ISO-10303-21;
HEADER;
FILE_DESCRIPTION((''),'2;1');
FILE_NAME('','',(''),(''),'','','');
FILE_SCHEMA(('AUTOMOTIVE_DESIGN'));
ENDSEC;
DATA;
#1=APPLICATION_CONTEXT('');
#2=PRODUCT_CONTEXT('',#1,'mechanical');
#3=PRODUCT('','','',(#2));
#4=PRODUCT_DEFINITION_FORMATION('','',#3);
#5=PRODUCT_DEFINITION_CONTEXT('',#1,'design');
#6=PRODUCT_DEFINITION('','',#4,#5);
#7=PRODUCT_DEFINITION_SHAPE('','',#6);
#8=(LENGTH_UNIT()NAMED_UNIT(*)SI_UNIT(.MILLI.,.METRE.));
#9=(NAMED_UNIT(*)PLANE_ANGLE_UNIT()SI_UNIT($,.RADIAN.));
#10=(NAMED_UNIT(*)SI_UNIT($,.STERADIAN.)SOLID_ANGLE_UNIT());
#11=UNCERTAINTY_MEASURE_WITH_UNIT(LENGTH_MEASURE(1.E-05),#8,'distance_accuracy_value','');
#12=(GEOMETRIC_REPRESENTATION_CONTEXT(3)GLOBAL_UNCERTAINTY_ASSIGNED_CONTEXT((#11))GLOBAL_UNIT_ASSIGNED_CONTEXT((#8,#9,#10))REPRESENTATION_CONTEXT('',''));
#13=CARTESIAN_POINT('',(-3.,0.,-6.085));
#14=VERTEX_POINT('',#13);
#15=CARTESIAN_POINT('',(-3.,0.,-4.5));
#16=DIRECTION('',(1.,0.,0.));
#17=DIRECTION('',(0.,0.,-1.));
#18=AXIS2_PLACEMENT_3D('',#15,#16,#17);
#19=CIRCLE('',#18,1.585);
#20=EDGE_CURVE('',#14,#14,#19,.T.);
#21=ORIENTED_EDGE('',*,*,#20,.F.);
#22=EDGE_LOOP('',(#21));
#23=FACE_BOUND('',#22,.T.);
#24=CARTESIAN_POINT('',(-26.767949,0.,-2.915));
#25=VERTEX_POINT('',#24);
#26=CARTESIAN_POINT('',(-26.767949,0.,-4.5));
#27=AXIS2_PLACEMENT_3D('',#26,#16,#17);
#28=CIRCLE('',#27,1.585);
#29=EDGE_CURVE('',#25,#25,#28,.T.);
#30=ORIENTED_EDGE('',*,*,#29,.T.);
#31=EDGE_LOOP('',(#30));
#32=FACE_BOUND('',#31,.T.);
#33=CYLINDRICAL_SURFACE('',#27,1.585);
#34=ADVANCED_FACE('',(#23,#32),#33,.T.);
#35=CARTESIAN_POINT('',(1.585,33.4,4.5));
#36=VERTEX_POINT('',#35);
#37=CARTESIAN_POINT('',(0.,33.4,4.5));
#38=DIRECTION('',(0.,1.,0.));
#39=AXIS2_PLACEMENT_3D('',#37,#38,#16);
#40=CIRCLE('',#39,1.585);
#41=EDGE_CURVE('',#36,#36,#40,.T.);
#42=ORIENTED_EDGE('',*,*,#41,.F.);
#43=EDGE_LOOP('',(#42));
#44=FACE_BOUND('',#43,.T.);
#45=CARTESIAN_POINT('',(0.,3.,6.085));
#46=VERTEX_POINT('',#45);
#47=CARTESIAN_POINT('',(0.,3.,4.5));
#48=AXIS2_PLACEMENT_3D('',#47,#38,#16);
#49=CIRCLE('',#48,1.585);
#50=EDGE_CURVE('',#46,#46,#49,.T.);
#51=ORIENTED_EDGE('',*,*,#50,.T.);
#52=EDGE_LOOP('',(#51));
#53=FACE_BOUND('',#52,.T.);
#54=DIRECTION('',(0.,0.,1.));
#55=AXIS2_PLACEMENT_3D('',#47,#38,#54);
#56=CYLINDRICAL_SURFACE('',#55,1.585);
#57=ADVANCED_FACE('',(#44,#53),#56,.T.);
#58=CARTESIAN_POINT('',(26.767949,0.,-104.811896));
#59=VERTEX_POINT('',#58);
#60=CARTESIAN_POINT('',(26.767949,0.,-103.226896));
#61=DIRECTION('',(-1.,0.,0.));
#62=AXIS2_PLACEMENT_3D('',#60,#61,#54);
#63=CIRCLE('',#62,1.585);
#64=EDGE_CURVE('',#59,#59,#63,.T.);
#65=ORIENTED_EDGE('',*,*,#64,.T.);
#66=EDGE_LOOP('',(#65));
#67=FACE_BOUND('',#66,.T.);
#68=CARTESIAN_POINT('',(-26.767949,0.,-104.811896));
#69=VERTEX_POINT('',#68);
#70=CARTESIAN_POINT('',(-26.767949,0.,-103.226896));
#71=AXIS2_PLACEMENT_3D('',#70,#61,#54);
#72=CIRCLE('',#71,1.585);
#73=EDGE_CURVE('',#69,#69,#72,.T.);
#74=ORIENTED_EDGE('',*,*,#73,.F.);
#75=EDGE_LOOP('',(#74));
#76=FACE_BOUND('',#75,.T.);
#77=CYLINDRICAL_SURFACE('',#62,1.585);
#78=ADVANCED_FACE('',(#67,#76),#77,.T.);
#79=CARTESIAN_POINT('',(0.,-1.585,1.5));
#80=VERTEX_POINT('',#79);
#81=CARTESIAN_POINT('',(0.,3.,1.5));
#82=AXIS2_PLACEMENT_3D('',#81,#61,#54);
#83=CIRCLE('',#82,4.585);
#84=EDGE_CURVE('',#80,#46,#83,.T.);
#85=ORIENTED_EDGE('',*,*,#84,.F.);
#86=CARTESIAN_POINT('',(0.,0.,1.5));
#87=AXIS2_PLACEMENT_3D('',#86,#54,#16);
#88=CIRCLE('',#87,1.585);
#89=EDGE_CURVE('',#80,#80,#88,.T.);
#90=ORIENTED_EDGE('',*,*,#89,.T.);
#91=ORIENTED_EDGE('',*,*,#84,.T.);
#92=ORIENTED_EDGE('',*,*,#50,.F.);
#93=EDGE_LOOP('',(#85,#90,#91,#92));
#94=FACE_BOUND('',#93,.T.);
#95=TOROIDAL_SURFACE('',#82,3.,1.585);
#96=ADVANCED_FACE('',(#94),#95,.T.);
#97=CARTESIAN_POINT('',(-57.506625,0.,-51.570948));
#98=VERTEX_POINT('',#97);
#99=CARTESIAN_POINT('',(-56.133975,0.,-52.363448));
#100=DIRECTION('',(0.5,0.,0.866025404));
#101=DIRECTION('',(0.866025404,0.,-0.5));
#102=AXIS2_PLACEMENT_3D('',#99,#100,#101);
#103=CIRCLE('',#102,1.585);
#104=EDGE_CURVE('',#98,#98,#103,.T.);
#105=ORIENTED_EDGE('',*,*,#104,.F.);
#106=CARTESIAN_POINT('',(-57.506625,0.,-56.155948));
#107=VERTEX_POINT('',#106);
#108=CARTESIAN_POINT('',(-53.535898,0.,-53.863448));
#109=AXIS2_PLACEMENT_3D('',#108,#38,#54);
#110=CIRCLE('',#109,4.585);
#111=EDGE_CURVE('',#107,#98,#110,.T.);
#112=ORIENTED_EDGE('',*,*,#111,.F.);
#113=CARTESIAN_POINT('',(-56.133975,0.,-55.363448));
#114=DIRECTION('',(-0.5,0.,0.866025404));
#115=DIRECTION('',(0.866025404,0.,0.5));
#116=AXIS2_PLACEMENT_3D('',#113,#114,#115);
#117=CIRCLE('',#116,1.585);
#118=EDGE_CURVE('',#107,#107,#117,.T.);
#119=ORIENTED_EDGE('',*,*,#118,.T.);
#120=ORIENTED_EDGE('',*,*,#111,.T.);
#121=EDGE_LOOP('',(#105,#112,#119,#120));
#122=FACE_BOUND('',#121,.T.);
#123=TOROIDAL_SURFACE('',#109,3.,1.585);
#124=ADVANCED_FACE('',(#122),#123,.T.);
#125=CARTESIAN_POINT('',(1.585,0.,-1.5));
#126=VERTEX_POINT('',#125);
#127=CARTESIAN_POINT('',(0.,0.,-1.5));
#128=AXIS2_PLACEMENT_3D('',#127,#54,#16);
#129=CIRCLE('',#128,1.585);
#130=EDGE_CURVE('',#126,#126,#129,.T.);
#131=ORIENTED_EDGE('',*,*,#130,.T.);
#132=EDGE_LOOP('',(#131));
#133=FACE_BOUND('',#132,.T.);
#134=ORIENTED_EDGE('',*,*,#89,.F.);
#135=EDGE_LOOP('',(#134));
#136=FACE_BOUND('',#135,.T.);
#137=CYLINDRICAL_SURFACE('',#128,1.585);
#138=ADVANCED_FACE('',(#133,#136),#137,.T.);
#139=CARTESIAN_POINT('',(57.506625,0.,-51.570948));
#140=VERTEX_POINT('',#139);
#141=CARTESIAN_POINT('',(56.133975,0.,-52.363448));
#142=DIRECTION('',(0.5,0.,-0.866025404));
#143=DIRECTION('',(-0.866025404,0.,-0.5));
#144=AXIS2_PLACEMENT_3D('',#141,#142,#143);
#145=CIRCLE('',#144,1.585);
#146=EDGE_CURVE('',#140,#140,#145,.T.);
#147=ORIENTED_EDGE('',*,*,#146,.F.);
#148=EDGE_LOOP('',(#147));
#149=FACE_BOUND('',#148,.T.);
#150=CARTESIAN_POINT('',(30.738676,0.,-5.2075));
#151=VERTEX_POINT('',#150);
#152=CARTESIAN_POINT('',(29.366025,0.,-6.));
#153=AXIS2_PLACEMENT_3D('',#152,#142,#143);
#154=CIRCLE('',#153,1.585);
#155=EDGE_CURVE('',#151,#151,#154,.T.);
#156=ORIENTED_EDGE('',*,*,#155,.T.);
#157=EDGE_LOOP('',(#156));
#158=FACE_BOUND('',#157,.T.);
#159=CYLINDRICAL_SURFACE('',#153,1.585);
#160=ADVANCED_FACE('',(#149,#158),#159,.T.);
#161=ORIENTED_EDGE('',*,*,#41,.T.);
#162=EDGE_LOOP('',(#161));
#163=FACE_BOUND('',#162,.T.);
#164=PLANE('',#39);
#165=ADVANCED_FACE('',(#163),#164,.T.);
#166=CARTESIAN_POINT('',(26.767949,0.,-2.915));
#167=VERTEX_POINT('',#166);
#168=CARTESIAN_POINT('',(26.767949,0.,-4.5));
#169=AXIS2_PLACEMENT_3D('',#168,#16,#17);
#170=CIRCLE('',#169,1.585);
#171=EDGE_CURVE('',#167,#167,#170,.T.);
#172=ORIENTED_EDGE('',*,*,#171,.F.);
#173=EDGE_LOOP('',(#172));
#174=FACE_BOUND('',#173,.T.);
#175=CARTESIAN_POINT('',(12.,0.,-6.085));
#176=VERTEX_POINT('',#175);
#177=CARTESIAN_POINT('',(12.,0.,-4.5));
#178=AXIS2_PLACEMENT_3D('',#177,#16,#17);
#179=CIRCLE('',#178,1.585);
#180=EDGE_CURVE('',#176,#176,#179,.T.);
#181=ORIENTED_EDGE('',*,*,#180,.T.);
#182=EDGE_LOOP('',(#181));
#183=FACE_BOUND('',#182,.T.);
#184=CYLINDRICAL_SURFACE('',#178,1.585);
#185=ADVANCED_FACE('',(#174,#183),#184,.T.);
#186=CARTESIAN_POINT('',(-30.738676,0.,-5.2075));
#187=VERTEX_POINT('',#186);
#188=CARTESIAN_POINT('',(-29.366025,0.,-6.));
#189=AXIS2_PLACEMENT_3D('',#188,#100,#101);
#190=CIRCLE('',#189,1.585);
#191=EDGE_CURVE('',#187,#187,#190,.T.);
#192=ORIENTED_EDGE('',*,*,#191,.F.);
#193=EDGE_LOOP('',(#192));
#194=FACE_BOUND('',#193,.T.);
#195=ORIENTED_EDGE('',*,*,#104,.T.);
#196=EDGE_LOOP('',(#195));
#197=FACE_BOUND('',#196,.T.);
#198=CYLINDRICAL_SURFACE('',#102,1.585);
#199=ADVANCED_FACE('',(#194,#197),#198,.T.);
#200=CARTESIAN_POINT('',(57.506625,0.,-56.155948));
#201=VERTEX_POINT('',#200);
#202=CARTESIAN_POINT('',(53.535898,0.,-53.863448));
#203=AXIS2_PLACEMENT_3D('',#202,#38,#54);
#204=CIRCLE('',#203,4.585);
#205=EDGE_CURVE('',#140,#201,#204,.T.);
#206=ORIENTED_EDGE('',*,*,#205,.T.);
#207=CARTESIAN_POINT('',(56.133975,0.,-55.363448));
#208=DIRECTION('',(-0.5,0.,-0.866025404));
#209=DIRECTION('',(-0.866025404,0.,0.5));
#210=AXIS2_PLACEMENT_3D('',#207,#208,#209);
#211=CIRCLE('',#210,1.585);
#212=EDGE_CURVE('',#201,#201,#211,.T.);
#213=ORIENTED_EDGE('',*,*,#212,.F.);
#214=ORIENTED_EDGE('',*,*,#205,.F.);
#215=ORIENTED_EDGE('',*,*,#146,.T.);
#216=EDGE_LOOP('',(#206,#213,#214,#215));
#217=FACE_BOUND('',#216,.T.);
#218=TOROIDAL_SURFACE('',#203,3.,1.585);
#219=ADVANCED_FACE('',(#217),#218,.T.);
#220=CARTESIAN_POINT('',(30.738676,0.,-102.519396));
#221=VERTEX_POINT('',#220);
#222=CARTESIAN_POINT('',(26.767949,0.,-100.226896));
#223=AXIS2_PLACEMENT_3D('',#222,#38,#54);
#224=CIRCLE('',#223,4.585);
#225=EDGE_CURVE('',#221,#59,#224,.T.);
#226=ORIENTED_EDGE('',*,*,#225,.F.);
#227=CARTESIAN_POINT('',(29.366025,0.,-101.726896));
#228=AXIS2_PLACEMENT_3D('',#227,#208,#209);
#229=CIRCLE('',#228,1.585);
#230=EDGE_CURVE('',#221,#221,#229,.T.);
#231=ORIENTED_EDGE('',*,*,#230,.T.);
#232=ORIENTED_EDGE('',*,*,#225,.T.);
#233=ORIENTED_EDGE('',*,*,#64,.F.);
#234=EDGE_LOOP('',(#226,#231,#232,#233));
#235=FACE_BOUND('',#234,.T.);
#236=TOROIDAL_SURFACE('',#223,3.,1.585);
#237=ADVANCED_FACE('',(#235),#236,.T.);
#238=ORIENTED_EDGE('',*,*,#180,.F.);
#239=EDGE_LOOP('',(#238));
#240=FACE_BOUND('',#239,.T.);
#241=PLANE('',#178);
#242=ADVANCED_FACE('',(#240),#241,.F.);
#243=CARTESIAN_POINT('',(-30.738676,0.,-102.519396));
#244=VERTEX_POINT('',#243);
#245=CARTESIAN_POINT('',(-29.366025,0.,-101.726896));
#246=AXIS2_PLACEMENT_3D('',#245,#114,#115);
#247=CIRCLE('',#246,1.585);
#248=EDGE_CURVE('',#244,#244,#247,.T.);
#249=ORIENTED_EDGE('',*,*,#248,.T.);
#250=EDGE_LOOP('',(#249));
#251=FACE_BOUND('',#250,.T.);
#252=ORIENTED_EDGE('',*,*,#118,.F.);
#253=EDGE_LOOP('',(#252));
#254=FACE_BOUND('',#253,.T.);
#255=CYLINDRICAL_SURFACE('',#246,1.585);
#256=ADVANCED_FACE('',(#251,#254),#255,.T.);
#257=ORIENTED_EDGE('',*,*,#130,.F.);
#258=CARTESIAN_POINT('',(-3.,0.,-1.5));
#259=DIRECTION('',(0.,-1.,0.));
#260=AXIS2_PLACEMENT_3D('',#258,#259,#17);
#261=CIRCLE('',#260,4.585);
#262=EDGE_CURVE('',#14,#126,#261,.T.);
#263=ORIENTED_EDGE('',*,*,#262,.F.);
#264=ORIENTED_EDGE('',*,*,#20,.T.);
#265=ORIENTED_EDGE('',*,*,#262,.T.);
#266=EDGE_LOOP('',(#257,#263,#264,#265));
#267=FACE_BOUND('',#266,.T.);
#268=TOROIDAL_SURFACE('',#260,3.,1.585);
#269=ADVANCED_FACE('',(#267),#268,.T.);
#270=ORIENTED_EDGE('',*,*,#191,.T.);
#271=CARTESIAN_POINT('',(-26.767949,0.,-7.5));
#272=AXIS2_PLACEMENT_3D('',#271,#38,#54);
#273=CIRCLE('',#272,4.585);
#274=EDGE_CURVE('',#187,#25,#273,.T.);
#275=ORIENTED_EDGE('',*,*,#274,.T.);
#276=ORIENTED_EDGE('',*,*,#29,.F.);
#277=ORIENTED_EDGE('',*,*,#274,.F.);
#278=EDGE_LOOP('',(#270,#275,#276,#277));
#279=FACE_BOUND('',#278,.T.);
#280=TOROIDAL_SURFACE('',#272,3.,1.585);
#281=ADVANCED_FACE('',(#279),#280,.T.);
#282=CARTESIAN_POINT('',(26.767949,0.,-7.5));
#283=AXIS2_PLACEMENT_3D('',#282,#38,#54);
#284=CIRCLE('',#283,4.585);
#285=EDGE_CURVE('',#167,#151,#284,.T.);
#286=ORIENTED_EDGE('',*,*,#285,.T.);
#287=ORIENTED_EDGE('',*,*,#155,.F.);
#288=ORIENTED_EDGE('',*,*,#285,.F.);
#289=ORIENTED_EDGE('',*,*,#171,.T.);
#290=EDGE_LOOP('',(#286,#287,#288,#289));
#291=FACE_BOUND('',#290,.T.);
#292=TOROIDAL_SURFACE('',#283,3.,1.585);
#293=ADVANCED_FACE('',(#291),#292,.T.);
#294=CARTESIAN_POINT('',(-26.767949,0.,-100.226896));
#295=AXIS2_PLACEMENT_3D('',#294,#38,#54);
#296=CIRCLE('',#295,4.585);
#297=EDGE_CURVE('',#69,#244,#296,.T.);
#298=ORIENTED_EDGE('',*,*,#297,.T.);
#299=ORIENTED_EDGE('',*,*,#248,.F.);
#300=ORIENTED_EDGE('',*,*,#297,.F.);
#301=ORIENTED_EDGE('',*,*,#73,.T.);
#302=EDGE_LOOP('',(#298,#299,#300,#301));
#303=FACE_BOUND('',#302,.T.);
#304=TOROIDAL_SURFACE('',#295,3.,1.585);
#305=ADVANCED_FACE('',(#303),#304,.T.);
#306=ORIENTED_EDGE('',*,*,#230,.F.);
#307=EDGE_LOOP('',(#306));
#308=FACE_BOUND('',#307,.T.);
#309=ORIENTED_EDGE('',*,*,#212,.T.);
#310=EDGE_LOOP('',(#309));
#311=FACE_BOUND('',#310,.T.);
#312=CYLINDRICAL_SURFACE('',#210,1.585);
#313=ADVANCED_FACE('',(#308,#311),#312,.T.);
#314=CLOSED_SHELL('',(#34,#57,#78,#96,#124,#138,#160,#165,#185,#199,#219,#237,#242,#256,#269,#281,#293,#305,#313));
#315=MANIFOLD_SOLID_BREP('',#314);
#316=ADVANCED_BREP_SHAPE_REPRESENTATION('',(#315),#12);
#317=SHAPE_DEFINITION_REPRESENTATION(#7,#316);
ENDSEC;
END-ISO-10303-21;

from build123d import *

# Parameters (mm, degrees)
ESBO_O2_R              = 1.585
VARREDURA4_OUTLINE_R   = 1.585
VARREDURA4_ANGLE       = 90
VARREDURA4_START       = -1.5000001
VARREDURA4_2_OUTLINE_R = 1.585
VARREDURA4_2_DEPTH     = 3.0000002
VARREDURA4_START_2     = 2.9999999
VARREDURA4_3_OUTLINE_R = 1.585
VARREDURA4_3_DEPTH     = 30.4000001


with BuildPart() as part:
    # Varredura3: sweep along a path in Esboço1
    with BuildLine(Plane(origin=(0, 0, 0), x_dir=(1, 0, 0), z_dir=(0, 1, 0))) as varredura3_path:
        Line((0, 0), (0, 1.5))
        ThreePointArc((0, 1.5), (-0.878679656, 3.621320344), (-3, 4.5))
        Line((-3, 4.5), (-26.767949192, 4.5))
        ThreePointArc((-26.767949192, 4.5), (-28.267949192, 4.901923789), (-29.366025404, 6))
        Line((-29.366025404, 6), (-56.133974596, 52.363448016))
        ThreePointArc((-56.133974596, 52.363448016), (-56.535898385, 53.863448016), (-56.133974596, 55.363448016))
        Line((-56.133974596, 55.363448016), (-29.366025404, 101.726896031))
        ThreePointArc((-29.366025404, 101.726896031), (-28.267949192, 102.824972243), (-26.767949192, 103.226896031))
        Line((-26.767949192, 103.226896031), (26.767949192, 103.226896031))
        ThreePointArc((26.767949192, 103.226896031), (28.267949192, 102.824972243), (29.366025404, 101.726896031))
        Line((29.366025404, 101.726896031), (56.133974596, 55.363448016))
        ThreePointArc((56.133974596, 55.363448016), (56.535898385, 53.863448016), (56.133974596, 52.363448016))
        Line((56.133974596, 52.363448016), (29.366025404, 6))
        ThreePointArc((29.366025404, 6), (28.267949192, 4.901923789), (26.767949192, 4.5))
        Line((26.767949192, 4.5), (12, 4.5))
    # Esboço2 → Varredura3 (sweep)
    with BuildSketch(Plane.XY):
        Circle(ESBO_O2_R)
    sweep(path=varredura3_path.line)



with BuildPart() as body_2:
    # Varredura4: read off the stored shape, not the designer's step
    # Varredura4 outline → Varredura4 (revolve)
    with BuildSketch(Plane(origin=(0, 3, 1.5), x_dir=(0, 0, 1), z_dir=(0, 1, 0))):
        with Locations((3, 0)):
            Circle(VARREDURA4_OUTLINE_R)
    revolve(axis=Axis((0, 3, 1.5), (1, 0, 0)), revolution_arc=VARREDURA4_ANGLE)


with BuildPart() as part_1:
    add(part.part)

    add(body_2.part)  # Varredura4 2 merges body 2
    # Varredura4 2 outline → Varredura4 2 (add)
    with BuildSketch(Plane.XY.offset(VARREDURA4_START)):
        Circle(VARREDURA4_2_OUTLINE_R)
    extrude(amount=VARREDURA4_2_DEPTH)

    # Varredura4 3 outline → Varredura4 3 (add)
    with BuildSketch(Plane(origin=(0, 0, 0), x_dir=(1, 0, 0), z_dir=(0, 1, 0)).offset(VARREDURA4_START_2)):
        with Locations((0, -4.5)):
            Circle(VARREDURA4_3_OUTLINE_R)
    extrude(amount=VARREDURA4_3_DEPTH)


solid = part_1.part
